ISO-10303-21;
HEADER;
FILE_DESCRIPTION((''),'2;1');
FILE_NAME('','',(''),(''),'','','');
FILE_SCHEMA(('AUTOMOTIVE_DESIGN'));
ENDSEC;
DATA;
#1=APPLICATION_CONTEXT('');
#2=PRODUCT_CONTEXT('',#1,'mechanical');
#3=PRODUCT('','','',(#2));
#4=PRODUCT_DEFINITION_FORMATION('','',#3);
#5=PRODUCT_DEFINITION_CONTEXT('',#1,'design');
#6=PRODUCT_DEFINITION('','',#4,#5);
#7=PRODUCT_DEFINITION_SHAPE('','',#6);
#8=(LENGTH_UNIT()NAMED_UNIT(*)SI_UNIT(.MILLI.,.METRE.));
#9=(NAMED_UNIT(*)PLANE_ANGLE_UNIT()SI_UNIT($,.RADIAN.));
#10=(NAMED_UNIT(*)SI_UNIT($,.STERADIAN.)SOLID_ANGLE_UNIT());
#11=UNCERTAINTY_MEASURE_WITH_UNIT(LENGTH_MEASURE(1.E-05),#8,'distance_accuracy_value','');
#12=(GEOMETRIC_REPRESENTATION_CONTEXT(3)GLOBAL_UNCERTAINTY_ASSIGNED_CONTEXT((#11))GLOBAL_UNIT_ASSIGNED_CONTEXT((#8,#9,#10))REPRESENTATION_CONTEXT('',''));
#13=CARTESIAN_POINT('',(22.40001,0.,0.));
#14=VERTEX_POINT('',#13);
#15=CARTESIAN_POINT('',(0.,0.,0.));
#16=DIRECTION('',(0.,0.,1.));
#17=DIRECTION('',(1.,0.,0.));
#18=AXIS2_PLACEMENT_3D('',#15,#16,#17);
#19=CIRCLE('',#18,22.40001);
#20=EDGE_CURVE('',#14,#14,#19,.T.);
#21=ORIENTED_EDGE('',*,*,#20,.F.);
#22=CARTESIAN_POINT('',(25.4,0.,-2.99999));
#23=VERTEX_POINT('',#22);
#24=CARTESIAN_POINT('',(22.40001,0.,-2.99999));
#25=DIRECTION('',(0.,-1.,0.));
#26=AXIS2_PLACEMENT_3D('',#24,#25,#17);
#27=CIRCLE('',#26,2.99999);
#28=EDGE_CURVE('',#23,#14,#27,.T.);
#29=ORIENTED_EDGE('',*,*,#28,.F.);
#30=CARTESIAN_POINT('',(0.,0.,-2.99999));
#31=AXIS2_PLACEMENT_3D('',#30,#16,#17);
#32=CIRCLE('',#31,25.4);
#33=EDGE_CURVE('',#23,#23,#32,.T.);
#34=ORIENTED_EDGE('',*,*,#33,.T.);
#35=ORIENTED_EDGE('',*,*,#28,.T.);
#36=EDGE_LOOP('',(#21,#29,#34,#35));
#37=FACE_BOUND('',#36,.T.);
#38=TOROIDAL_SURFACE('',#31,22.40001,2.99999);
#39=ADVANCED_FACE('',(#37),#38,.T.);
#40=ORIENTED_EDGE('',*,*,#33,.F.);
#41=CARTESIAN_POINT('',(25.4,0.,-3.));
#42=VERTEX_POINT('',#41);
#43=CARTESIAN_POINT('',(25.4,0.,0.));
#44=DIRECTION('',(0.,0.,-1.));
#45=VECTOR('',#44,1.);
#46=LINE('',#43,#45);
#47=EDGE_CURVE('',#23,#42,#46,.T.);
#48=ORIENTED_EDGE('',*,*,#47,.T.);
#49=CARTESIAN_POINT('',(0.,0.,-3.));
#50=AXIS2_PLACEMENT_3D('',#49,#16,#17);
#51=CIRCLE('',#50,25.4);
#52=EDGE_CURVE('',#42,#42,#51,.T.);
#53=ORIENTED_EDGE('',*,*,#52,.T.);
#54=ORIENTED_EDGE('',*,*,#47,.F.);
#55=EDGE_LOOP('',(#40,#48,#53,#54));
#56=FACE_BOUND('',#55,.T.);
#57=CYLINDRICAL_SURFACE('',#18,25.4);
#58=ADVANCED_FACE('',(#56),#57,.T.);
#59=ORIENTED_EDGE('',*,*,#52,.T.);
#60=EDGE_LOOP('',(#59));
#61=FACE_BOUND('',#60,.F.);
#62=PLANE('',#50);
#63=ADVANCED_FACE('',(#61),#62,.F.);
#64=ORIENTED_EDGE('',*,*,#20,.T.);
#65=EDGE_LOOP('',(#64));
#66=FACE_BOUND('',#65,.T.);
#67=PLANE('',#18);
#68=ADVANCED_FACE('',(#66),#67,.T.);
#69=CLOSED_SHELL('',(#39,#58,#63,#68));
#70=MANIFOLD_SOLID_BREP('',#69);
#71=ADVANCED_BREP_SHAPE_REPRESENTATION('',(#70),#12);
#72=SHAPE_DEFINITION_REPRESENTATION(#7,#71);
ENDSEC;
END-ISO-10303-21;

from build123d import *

# Parameters (mm, degrees)
F0_R     = 25.4
F1_DEPTH = 3
F2_R     = 2.99999


# Not quite as in the source:
# - a fillet or chamfer is up to 0.001 mm smaller than in the source, because OpenCascade refuses the exact size


with BuildPart() as f1:
    # F0 (on Top) → F1 (new body)
    with BuildSketch(Plane.XY):
        Circle(F0_R)
    extrude(amount=-F1_DEPTH)

    # F2 (radius 3 in the source; OpenCascade refuses exactly that, so slightly less here)
    f2_edges = [f1.edges().sort_by_distance(p)[0] for p in [
        (-25.4, 0, 0),
    ]]
    fillet(f2_edges, radius=F2_R)


solid = f1.part
